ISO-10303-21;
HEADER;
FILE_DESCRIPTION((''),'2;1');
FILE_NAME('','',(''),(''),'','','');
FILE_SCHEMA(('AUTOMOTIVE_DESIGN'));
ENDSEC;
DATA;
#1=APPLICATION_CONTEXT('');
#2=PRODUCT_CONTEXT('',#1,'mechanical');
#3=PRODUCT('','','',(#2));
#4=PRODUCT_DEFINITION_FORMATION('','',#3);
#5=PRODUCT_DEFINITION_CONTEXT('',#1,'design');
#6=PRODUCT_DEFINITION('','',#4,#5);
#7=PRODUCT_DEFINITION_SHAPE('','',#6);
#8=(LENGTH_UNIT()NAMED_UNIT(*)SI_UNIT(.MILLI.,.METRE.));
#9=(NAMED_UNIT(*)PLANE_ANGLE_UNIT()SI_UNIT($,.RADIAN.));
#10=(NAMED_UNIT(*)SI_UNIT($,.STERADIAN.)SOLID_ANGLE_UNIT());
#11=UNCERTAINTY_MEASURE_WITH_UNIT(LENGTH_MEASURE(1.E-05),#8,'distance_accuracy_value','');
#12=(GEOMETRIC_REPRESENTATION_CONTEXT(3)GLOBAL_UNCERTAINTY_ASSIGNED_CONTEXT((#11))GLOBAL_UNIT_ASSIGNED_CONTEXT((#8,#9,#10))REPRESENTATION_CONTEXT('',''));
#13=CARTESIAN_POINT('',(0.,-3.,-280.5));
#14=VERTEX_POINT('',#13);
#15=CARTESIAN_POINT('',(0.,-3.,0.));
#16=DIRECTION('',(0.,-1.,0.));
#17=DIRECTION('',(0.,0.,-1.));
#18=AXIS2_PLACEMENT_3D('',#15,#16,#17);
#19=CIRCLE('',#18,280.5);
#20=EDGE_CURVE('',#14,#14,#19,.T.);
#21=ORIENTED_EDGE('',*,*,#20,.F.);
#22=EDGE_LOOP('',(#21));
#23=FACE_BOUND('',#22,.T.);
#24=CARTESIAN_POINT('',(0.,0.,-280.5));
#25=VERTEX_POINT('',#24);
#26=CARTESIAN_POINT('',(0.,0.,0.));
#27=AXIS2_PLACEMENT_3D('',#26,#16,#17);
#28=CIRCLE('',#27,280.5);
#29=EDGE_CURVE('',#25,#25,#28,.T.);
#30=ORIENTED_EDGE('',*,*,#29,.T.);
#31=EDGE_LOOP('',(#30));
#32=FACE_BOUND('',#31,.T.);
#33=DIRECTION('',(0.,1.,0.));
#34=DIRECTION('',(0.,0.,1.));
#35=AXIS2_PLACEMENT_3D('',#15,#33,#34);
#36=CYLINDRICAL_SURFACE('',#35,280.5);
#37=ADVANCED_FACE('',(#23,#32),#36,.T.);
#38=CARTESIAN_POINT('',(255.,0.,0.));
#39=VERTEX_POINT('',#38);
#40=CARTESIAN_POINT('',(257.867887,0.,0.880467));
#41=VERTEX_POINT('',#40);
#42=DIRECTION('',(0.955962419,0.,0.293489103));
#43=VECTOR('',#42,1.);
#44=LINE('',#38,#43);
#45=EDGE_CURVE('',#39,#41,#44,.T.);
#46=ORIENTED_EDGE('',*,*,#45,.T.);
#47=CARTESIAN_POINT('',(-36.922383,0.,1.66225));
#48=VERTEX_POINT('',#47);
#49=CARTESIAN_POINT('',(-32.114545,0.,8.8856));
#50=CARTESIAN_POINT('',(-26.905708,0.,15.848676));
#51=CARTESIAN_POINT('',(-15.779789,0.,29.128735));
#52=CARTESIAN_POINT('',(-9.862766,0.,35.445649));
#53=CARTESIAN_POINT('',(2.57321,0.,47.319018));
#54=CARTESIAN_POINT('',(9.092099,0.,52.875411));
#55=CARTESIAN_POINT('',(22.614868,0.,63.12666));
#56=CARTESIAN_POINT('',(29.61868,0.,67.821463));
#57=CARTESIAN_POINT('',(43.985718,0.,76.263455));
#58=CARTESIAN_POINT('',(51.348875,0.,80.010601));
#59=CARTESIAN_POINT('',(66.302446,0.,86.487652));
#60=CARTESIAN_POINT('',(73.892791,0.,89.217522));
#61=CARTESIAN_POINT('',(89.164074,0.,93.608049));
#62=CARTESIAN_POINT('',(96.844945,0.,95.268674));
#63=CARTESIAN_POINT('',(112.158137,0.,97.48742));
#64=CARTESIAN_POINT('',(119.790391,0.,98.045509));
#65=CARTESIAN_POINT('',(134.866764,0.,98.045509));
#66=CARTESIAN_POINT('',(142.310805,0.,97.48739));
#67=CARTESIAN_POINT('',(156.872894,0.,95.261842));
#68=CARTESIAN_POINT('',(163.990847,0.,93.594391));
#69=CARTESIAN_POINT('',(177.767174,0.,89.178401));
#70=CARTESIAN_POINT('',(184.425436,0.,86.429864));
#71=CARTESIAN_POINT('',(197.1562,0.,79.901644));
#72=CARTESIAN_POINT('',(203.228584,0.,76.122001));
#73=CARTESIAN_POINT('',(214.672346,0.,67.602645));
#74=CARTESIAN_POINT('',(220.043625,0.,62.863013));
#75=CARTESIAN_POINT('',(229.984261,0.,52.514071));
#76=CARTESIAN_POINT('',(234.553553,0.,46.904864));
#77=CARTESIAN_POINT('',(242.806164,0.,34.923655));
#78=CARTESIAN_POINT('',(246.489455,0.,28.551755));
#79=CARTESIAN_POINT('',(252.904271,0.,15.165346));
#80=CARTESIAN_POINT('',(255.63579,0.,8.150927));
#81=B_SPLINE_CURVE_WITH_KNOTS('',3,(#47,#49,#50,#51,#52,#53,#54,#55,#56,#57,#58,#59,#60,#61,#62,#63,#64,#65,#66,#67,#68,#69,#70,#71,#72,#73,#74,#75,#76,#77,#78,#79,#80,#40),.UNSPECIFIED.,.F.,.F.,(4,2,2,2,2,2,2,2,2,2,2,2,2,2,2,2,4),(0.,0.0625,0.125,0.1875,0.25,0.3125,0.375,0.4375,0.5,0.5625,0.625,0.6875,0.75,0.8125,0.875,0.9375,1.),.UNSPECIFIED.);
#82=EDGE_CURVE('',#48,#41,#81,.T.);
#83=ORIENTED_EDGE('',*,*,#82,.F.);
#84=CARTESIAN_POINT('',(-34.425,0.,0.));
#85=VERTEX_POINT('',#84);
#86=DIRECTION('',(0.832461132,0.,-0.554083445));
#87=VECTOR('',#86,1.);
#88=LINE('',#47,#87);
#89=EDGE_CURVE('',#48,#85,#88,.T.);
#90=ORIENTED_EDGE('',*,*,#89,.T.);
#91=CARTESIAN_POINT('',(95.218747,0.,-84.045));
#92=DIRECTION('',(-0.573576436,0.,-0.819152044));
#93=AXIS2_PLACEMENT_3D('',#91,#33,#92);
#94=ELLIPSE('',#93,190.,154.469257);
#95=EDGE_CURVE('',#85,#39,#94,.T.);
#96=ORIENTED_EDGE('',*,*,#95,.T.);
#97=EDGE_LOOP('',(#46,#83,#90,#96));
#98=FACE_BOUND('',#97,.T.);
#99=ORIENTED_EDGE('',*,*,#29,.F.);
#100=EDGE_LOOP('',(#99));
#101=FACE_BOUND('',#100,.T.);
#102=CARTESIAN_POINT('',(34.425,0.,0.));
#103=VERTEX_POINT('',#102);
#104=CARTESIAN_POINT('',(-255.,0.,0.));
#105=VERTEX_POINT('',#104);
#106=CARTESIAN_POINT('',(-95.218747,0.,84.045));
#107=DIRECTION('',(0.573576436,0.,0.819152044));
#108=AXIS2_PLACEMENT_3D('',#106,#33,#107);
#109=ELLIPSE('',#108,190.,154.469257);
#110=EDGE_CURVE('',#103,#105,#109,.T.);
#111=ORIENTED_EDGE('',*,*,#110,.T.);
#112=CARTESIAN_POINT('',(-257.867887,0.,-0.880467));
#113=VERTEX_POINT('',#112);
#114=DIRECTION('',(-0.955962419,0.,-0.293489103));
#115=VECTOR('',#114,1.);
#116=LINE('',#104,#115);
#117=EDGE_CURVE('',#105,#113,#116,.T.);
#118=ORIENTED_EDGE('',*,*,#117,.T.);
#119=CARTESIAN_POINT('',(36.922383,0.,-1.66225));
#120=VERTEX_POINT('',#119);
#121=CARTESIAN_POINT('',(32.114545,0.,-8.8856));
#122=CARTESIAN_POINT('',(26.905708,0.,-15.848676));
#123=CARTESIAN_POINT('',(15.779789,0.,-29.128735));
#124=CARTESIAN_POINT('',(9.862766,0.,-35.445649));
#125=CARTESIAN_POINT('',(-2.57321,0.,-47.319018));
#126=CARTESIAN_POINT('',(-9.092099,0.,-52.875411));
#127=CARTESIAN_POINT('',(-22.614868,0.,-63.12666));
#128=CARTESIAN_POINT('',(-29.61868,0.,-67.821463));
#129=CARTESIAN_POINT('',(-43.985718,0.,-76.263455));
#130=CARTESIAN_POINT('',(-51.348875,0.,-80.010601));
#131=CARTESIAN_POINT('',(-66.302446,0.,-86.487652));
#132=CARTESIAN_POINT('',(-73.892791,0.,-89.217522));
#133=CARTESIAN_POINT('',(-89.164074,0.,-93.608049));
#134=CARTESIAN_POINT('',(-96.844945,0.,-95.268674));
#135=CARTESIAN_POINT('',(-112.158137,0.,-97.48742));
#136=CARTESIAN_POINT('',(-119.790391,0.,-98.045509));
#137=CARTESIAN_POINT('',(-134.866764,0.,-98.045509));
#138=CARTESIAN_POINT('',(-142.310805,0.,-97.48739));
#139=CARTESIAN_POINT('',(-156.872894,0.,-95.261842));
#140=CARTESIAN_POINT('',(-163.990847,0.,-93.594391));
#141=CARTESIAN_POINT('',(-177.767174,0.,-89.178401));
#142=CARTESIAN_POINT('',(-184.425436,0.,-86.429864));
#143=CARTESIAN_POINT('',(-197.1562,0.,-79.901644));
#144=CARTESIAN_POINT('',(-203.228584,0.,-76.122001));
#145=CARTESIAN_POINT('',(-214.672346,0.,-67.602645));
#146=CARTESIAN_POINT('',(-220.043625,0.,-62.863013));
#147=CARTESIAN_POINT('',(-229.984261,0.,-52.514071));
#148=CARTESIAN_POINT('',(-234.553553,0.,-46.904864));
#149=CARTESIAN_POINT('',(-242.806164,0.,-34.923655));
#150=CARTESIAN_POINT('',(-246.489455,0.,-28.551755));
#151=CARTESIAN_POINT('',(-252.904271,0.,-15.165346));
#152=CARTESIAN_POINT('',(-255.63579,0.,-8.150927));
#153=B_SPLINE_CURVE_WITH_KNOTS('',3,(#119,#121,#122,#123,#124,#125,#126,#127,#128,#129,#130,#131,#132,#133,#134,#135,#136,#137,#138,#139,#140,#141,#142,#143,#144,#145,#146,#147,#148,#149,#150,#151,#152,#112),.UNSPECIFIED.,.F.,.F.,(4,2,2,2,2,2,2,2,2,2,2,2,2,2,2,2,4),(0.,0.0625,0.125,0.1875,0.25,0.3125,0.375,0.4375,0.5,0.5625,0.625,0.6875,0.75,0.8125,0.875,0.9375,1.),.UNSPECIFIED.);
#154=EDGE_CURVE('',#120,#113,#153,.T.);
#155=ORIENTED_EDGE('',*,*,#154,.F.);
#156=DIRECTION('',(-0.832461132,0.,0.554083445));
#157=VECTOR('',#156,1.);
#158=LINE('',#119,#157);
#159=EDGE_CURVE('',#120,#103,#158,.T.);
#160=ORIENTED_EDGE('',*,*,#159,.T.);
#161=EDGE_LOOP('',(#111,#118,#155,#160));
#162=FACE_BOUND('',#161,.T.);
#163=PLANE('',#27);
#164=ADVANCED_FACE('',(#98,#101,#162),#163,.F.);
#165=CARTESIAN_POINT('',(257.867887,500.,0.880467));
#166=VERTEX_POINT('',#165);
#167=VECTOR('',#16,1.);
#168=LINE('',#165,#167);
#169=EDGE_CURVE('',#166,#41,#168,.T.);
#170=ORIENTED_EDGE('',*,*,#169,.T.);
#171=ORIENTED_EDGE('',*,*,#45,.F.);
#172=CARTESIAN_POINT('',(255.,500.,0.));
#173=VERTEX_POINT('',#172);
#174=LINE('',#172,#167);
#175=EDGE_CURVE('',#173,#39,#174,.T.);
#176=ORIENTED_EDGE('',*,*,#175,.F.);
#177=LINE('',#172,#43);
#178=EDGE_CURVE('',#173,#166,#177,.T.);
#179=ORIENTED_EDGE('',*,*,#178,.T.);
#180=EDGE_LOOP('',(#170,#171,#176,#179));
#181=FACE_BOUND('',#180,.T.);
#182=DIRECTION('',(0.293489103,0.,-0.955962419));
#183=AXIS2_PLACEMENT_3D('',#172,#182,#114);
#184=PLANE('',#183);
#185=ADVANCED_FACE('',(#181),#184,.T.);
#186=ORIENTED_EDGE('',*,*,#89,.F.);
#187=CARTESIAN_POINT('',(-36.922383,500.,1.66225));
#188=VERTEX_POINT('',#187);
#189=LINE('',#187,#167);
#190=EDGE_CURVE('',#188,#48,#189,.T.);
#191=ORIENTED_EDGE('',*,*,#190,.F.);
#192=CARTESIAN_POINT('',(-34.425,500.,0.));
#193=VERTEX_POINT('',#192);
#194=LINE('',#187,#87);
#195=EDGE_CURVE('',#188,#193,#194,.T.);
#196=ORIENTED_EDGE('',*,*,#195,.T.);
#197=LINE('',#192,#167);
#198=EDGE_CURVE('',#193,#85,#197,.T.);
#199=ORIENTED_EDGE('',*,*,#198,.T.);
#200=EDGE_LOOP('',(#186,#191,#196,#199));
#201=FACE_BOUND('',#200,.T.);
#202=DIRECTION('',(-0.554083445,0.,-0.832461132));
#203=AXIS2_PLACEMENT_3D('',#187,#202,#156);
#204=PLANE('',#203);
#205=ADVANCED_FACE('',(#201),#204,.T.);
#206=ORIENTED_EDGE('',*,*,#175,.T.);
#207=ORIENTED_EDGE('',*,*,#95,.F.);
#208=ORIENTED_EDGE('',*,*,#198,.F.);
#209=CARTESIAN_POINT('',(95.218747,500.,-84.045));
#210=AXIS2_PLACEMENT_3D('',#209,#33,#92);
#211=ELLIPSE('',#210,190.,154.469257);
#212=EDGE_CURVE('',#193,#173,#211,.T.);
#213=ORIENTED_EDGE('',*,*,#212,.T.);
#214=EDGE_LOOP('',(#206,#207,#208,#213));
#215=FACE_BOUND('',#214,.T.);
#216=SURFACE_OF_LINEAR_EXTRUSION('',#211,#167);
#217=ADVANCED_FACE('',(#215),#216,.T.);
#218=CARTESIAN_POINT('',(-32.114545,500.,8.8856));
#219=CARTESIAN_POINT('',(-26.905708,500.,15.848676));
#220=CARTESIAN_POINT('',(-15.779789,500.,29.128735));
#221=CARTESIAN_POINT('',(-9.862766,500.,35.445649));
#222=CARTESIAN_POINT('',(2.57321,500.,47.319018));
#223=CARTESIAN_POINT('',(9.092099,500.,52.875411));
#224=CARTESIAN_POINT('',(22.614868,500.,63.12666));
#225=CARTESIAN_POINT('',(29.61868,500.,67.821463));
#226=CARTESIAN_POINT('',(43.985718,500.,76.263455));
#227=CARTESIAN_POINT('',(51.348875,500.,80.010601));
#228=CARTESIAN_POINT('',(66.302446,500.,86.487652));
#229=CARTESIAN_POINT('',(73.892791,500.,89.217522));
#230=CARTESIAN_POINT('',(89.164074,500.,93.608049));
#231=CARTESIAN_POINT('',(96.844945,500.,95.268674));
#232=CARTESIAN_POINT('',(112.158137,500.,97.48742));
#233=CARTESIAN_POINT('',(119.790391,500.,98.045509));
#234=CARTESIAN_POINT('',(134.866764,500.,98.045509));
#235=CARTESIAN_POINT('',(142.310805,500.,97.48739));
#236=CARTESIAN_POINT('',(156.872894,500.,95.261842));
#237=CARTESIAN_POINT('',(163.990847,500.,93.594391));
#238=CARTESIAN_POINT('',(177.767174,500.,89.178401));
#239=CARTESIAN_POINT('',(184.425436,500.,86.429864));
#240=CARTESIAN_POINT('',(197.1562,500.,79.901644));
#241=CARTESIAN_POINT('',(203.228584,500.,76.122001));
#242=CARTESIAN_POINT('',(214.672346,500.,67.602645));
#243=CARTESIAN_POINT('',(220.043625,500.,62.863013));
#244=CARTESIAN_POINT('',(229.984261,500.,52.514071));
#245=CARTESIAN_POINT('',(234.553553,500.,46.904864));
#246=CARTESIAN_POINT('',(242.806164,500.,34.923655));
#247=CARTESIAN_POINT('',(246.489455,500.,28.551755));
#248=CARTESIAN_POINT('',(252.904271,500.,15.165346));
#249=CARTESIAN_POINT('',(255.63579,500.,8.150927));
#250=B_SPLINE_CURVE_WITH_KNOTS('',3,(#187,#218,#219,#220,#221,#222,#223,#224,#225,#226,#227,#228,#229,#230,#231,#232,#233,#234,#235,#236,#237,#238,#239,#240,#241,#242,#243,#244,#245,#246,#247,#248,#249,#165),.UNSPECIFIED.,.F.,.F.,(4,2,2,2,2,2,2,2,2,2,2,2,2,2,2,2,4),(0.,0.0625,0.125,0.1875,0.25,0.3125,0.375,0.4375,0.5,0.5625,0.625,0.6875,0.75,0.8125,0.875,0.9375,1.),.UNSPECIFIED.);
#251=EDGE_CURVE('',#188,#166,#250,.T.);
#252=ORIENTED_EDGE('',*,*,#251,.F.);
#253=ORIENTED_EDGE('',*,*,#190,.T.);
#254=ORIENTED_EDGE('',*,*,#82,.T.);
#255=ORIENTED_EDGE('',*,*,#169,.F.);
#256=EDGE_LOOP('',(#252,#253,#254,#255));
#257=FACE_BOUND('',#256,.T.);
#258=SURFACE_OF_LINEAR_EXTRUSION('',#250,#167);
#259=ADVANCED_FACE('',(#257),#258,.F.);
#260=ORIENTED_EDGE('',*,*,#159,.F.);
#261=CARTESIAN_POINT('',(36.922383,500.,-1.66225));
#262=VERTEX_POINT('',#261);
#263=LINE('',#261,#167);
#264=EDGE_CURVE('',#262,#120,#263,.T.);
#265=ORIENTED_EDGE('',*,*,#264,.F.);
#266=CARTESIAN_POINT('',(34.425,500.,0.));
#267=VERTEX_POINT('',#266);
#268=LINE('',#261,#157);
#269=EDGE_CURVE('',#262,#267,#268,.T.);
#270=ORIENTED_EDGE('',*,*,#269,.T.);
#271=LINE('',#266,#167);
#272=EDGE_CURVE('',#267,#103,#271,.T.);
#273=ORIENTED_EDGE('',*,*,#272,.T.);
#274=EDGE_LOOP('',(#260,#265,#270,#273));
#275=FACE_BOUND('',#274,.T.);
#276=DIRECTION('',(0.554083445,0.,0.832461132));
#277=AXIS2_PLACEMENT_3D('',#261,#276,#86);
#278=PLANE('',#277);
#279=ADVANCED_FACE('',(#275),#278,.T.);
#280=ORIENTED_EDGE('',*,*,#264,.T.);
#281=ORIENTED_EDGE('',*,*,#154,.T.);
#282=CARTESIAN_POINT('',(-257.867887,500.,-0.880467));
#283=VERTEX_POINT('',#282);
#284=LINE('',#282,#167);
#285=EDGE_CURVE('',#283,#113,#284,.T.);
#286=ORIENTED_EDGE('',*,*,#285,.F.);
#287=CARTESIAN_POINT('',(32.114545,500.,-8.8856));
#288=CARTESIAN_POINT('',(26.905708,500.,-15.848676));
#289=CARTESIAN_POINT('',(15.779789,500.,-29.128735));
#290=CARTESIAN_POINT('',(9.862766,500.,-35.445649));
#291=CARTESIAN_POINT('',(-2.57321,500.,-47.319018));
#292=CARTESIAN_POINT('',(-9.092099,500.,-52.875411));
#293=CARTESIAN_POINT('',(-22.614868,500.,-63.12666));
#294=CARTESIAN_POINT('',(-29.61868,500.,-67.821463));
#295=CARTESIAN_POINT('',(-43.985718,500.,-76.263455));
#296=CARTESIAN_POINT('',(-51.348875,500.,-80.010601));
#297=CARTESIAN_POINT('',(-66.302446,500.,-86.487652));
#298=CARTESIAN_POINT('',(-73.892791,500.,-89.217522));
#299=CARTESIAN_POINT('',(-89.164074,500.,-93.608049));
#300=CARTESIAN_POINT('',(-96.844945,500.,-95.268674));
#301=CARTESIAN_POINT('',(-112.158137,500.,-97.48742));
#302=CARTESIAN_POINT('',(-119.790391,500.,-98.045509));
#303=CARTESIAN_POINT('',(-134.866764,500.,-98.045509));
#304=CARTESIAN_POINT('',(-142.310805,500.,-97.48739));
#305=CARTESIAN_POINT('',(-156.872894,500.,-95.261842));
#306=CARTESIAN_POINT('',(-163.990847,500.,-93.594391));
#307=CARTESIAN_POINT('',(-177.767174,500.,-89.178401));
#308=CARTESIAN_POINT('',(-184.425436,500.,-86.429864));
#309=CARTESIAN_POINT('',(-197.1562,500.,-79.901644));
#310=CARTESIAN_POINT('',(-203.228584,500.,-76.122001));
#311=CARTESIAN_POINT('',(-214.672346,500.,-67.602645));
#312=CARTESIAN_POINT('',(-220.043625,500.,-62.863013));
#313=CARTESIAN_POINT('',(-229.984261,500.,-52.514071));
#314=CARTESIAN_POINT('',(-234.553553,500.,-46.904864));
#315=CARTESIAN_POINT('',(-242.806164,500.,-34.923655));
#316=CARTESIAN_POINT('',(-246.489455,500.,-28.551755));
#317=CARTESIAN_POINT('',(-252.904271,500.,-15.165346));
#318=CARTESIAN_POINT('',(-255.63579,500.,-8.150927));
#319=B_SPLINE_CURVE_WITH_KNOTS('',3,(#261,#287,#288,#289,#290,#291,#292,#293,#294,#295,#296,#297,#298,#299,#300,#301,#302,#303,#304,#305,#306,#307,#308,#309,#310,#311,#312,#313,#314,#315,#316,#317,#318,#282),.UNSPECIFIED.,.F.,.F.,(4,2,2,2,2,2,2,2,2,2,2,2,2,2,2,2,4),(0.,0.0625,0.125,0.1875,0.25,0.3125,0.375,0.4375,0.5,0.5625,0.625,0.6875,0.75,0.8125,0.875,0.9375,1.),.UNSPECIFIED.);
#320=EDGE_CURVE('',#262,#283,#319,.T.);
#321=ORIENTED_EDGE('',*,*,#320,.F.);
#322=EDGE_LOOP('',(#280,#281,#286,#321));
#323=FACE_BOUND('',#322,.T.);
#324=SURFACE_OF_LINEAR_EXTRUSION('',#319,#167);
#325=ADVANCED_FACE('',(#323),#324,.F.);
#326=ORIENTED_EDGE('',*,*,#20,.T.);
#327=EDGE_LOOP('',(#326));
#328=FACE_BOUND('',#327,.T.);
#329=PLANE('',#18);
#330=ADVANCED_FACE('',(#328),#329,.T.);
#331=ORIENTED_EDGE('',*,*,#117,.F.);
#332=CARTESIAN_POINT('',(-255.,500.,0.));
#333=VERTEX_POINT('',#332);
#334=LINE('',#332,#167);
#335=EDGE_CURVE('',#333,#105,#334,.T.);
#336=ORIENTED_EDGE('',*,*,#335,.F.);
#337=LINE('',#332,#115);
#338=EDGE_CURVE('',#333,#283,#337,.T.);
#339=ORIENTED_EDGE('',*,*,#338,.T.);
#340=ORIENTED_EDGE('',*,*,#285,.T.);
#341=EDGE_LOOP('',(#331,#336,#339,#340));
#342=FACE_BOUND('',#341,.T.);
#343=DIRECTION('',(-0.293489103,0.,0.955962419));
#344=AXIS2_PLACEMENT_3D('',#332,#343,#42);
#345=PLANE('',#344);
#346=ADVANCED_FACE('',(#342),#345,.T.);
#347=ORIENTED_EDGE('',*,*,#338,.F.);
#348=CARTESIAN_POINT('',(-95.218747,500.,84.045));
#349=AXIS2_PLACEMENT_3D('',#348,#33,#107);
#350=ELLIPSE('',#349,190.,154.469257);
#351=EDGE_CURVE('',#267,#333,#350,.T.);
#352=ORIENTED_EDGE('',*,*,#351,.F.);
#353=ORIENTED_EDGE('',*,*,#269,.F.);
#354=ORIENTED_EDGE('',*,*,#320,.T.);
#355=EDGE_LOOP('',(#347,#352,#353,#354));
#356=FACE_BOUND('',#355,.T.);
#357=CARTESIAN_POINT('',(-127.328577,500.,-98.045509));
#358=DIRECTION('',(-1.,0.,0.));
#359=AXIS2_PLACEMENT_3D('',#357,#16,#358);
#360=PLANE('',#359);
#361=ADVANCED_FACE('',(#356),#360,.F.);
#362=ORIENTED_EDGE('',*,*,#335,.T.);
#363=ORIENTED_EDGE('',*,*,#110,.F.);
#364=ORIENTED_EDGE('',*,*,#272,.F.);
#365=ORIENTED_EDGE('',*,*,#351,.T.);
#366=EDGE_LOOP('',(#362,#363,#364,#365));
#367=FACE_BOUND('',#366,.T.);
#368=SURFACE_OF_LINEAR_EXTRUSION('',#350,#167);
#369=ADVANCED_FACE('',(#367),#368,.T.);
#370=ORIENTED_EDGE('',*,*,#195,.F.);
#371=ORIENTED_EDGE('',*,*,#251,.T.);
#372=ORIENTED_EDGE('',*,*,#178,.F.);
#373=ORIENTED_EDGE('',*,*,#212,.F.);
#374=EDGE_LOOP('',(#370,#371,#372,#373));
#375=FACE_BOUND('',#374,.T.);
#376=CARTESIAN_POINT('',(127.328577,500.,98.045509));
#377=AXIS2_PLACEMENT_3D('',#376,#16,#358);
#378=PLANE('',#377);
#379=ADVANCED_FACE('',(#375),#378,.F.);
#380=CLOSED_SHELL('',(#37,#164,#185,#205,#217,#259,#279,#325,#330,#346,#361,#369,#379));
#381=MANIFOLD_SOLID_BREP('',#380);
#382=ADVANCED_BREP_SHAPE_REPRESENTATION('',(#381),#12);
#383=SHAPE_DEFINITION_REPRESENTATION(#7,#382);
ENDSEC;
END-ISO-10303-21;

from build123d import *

# Parameters (mm, degrees)
EXTRUIR_L_MINA1_DEPTH      = 500
CROQUIS2_R                 = 280.5
SALIENTE_EXTRUIR8_DEPTH    = 3
S_LIDO_MOVER_COPIAR1_ANGLE = 90
S_LIDO_MOVER_COPIAR4_ANGLE = 30
S_LIDO_MOVER_COPIAR5_ANGLE = 60


# Read off the part's stored shape, not the designer's step: Extruir-Lámina1
with BuildPart() as part:
    # Extruir-Lámina1 outline → Extruir-Lámina1 (new body)
    with BuildSketch(Plane(origin=(0, 0, 0), x_dir=(1, 0, 0), z_dir=(0, 1, 0))):
        with BuildLine():
            Line((34.425, 0), (36.922383395, 1.662250336))
            add(Edge.make_bspline(
                [(36.922383395, 1.662250336), (32.114544874, 8.885600411), (26.905707559, 15.848675795), (15.77978911, 29.128734644), (9.862765944, 35.445648919), (-2.573209928, 47.319017813), (-9.092098682, 52.875411067), (-22.614867545, 63.126659856), (-29.61867993, 67.821462762), (-43.985718131, 76.263455135), (-51.348874868, 80.010600631), (-66.302445601, 86.487652294), (-73.892791198, 89.217521701), (-89.164074387, 93.608048941), (-96.844944698, 95.268674387), (-112.158137305, 97.487420153), (-119.790390592, 98.045509366), (-134.866763518, 98.045509366), (-142.310805471, 97.487390167), (-156.872894422, 95.261841654), (-163.990846835, 93.594390609), (-177.767174385, 89.178401002), (-184.4254365, 86.429864216), (-197.156200497, 79.901643935), (-203.228583717, 76.122000799), (-214.672346426, 67.602645169), (-220.04362509, 62.863012804), (-229.984260691, 52.514070792), (-234.553552685, 46.904864224), (-242.80616442, 34.923654513), (-246.48945543, 28.551755016), (-252.904271235, 15.165345538), (-255.635790384, 8.150927099), (-257.867887256, 0.88046731)],
                knots=[0, 0, 0, 0, 0.0625, 0.0625, 0.125, 0.125, 0.1875, 0.1875, 0.25, 0.25, 0.3125, 0.3125, 0.375, 0.375, 0.4375, 0.4375, 0.5, 0.5, 0.5625, 0.5625, 0.625, 0.625, 0.6875, 0.6875, 0.75, 0.75, 0.8125, 0.8125, 0.875, 0.875, 0.9375, 0.9375, 1, 1, 1, 1], degree=3))
            Line((-257.867887256, 0.88046731), (-255, 0))
            add(Edge.make_bspline(
                [(34.425, 0), (-163.641209274, 297.576876047), (-255, 0)],
                knots=[1.541766118, 1.541766118, 1.541766118, 3.706390506, 3.706390506, 3.706390506], degree=2, weights=[1, 0.469287849, 1]))
        make_face()
        with BuildLine():
            Line((-34.425, 0), (-36.922383395, -1.662250336))
            add(Edge.make_bspline(
                [(-36.922383395, -1.662250336), (-32.114544874, -8.885600411), (-26.905707559, -15.848675795), (-15.77978911, -29.128734644), (-9.862765944, -35.445648919), (2.573209928, -47.319017813), (9.092098682, -52.875411067), (22.614867545, -63.126659856), (29.61867993, -67.821462762), (43.985718131, -76.263455135), (51.348874868, -80.010600631), (66.302445601, -86.487652294), (73.892791198, -89.217521701), (89.164074387, -93.608048941), (96.844944698, -95.268674387), (112.158137305, -97.487420153), (119.790390592, -98.045509366), (134.866763518, -98.045509366), (142.310805471, -97.487390167), (156.872894422, -95.261841654), (163.990846835, -93.594390609), (177.767174385, -89.178401002), (184.4254365, -86.429864216), (197.156200497, -79.901643935), (203.228583717, -76.122000799), (214.672346426, -67.602645169), (220.04362509, -62.863012804), (229.984260691, -52.514070792), (234.553552685, -46.904864224), (242.80616442, -34.923654513), (246.48945543, -28.551755016), (252.904271235, -15.165345538), (255.635790384, -8.150927099), (257.867887256, -0.88046731)],
                knots=[0, 0, 0, 0, 0.0625, 0.0625, 0.125, 0.125, 0.1875, 0.1875, 0.25, 0.25, 0.3125, 0.3125, 0.375, 0.375, 0.4375, 0.4375, 0.5, 0.5, 0.5625, 0.5625, 0.625, 0.625, 0.6875, 0.6875, 0.75, 0.75, 0.8125, 0.8125, 0.875, 0.875, 0.9375, 0.9375, 1, 1, 1, 1], degree=3))
            Line((257.867887256, -0.88046731), (255, 0))
            add(Edge.make_bspline(
                [(-34.425, 0), (163.641209274, -297.576876047), (255, 0)],
                knots=[1.541766118, 1.541766118, 1.541766118, 3.706390506, 3.706390506, 3.706390506], degree=2, weights=[1, 0.469287849, 1]))
        make_face()
    extrude(amount=EXTRUIR_L_MINA1_DEPTH)

    # Croquis2 → Saliente-Extruir8 (add)
    with BuildSketch(Plane.XZ):
        with Locations(Location((0, 0, 0), (0, 0, 270))):
            Circle(CROQUIS2_R)
    extrude(amount=SALIENTE_EXTRUIR8_DEPTH)


with BuildPart() as part_1:
    # Sólido-Mover/Copiar1: moved
    add(part.part.rotate(Axis((0, 0, 0), (0, -1, 0)), S_LIDO_MOVER_COPIAR1_ANGLE))


with BuildPart() as part_2:
    # Sólido-Mover/Copiar4: moved
    add(part_1.part.rotate(Axis((0, 0, 0), (0, 1, 0)), S_LIDO_MOVER_COPIAR4_ANGLE))


with BuildPart() as part_3:
    # Sólido-Mover/Copiar5: moved
    add(part_2.part.rotate(Axis((0, 0, 0), (0, 1, 0)), S_LIDO_MOVER_COPIAR5_ANGLE))


solid = part_3.part
